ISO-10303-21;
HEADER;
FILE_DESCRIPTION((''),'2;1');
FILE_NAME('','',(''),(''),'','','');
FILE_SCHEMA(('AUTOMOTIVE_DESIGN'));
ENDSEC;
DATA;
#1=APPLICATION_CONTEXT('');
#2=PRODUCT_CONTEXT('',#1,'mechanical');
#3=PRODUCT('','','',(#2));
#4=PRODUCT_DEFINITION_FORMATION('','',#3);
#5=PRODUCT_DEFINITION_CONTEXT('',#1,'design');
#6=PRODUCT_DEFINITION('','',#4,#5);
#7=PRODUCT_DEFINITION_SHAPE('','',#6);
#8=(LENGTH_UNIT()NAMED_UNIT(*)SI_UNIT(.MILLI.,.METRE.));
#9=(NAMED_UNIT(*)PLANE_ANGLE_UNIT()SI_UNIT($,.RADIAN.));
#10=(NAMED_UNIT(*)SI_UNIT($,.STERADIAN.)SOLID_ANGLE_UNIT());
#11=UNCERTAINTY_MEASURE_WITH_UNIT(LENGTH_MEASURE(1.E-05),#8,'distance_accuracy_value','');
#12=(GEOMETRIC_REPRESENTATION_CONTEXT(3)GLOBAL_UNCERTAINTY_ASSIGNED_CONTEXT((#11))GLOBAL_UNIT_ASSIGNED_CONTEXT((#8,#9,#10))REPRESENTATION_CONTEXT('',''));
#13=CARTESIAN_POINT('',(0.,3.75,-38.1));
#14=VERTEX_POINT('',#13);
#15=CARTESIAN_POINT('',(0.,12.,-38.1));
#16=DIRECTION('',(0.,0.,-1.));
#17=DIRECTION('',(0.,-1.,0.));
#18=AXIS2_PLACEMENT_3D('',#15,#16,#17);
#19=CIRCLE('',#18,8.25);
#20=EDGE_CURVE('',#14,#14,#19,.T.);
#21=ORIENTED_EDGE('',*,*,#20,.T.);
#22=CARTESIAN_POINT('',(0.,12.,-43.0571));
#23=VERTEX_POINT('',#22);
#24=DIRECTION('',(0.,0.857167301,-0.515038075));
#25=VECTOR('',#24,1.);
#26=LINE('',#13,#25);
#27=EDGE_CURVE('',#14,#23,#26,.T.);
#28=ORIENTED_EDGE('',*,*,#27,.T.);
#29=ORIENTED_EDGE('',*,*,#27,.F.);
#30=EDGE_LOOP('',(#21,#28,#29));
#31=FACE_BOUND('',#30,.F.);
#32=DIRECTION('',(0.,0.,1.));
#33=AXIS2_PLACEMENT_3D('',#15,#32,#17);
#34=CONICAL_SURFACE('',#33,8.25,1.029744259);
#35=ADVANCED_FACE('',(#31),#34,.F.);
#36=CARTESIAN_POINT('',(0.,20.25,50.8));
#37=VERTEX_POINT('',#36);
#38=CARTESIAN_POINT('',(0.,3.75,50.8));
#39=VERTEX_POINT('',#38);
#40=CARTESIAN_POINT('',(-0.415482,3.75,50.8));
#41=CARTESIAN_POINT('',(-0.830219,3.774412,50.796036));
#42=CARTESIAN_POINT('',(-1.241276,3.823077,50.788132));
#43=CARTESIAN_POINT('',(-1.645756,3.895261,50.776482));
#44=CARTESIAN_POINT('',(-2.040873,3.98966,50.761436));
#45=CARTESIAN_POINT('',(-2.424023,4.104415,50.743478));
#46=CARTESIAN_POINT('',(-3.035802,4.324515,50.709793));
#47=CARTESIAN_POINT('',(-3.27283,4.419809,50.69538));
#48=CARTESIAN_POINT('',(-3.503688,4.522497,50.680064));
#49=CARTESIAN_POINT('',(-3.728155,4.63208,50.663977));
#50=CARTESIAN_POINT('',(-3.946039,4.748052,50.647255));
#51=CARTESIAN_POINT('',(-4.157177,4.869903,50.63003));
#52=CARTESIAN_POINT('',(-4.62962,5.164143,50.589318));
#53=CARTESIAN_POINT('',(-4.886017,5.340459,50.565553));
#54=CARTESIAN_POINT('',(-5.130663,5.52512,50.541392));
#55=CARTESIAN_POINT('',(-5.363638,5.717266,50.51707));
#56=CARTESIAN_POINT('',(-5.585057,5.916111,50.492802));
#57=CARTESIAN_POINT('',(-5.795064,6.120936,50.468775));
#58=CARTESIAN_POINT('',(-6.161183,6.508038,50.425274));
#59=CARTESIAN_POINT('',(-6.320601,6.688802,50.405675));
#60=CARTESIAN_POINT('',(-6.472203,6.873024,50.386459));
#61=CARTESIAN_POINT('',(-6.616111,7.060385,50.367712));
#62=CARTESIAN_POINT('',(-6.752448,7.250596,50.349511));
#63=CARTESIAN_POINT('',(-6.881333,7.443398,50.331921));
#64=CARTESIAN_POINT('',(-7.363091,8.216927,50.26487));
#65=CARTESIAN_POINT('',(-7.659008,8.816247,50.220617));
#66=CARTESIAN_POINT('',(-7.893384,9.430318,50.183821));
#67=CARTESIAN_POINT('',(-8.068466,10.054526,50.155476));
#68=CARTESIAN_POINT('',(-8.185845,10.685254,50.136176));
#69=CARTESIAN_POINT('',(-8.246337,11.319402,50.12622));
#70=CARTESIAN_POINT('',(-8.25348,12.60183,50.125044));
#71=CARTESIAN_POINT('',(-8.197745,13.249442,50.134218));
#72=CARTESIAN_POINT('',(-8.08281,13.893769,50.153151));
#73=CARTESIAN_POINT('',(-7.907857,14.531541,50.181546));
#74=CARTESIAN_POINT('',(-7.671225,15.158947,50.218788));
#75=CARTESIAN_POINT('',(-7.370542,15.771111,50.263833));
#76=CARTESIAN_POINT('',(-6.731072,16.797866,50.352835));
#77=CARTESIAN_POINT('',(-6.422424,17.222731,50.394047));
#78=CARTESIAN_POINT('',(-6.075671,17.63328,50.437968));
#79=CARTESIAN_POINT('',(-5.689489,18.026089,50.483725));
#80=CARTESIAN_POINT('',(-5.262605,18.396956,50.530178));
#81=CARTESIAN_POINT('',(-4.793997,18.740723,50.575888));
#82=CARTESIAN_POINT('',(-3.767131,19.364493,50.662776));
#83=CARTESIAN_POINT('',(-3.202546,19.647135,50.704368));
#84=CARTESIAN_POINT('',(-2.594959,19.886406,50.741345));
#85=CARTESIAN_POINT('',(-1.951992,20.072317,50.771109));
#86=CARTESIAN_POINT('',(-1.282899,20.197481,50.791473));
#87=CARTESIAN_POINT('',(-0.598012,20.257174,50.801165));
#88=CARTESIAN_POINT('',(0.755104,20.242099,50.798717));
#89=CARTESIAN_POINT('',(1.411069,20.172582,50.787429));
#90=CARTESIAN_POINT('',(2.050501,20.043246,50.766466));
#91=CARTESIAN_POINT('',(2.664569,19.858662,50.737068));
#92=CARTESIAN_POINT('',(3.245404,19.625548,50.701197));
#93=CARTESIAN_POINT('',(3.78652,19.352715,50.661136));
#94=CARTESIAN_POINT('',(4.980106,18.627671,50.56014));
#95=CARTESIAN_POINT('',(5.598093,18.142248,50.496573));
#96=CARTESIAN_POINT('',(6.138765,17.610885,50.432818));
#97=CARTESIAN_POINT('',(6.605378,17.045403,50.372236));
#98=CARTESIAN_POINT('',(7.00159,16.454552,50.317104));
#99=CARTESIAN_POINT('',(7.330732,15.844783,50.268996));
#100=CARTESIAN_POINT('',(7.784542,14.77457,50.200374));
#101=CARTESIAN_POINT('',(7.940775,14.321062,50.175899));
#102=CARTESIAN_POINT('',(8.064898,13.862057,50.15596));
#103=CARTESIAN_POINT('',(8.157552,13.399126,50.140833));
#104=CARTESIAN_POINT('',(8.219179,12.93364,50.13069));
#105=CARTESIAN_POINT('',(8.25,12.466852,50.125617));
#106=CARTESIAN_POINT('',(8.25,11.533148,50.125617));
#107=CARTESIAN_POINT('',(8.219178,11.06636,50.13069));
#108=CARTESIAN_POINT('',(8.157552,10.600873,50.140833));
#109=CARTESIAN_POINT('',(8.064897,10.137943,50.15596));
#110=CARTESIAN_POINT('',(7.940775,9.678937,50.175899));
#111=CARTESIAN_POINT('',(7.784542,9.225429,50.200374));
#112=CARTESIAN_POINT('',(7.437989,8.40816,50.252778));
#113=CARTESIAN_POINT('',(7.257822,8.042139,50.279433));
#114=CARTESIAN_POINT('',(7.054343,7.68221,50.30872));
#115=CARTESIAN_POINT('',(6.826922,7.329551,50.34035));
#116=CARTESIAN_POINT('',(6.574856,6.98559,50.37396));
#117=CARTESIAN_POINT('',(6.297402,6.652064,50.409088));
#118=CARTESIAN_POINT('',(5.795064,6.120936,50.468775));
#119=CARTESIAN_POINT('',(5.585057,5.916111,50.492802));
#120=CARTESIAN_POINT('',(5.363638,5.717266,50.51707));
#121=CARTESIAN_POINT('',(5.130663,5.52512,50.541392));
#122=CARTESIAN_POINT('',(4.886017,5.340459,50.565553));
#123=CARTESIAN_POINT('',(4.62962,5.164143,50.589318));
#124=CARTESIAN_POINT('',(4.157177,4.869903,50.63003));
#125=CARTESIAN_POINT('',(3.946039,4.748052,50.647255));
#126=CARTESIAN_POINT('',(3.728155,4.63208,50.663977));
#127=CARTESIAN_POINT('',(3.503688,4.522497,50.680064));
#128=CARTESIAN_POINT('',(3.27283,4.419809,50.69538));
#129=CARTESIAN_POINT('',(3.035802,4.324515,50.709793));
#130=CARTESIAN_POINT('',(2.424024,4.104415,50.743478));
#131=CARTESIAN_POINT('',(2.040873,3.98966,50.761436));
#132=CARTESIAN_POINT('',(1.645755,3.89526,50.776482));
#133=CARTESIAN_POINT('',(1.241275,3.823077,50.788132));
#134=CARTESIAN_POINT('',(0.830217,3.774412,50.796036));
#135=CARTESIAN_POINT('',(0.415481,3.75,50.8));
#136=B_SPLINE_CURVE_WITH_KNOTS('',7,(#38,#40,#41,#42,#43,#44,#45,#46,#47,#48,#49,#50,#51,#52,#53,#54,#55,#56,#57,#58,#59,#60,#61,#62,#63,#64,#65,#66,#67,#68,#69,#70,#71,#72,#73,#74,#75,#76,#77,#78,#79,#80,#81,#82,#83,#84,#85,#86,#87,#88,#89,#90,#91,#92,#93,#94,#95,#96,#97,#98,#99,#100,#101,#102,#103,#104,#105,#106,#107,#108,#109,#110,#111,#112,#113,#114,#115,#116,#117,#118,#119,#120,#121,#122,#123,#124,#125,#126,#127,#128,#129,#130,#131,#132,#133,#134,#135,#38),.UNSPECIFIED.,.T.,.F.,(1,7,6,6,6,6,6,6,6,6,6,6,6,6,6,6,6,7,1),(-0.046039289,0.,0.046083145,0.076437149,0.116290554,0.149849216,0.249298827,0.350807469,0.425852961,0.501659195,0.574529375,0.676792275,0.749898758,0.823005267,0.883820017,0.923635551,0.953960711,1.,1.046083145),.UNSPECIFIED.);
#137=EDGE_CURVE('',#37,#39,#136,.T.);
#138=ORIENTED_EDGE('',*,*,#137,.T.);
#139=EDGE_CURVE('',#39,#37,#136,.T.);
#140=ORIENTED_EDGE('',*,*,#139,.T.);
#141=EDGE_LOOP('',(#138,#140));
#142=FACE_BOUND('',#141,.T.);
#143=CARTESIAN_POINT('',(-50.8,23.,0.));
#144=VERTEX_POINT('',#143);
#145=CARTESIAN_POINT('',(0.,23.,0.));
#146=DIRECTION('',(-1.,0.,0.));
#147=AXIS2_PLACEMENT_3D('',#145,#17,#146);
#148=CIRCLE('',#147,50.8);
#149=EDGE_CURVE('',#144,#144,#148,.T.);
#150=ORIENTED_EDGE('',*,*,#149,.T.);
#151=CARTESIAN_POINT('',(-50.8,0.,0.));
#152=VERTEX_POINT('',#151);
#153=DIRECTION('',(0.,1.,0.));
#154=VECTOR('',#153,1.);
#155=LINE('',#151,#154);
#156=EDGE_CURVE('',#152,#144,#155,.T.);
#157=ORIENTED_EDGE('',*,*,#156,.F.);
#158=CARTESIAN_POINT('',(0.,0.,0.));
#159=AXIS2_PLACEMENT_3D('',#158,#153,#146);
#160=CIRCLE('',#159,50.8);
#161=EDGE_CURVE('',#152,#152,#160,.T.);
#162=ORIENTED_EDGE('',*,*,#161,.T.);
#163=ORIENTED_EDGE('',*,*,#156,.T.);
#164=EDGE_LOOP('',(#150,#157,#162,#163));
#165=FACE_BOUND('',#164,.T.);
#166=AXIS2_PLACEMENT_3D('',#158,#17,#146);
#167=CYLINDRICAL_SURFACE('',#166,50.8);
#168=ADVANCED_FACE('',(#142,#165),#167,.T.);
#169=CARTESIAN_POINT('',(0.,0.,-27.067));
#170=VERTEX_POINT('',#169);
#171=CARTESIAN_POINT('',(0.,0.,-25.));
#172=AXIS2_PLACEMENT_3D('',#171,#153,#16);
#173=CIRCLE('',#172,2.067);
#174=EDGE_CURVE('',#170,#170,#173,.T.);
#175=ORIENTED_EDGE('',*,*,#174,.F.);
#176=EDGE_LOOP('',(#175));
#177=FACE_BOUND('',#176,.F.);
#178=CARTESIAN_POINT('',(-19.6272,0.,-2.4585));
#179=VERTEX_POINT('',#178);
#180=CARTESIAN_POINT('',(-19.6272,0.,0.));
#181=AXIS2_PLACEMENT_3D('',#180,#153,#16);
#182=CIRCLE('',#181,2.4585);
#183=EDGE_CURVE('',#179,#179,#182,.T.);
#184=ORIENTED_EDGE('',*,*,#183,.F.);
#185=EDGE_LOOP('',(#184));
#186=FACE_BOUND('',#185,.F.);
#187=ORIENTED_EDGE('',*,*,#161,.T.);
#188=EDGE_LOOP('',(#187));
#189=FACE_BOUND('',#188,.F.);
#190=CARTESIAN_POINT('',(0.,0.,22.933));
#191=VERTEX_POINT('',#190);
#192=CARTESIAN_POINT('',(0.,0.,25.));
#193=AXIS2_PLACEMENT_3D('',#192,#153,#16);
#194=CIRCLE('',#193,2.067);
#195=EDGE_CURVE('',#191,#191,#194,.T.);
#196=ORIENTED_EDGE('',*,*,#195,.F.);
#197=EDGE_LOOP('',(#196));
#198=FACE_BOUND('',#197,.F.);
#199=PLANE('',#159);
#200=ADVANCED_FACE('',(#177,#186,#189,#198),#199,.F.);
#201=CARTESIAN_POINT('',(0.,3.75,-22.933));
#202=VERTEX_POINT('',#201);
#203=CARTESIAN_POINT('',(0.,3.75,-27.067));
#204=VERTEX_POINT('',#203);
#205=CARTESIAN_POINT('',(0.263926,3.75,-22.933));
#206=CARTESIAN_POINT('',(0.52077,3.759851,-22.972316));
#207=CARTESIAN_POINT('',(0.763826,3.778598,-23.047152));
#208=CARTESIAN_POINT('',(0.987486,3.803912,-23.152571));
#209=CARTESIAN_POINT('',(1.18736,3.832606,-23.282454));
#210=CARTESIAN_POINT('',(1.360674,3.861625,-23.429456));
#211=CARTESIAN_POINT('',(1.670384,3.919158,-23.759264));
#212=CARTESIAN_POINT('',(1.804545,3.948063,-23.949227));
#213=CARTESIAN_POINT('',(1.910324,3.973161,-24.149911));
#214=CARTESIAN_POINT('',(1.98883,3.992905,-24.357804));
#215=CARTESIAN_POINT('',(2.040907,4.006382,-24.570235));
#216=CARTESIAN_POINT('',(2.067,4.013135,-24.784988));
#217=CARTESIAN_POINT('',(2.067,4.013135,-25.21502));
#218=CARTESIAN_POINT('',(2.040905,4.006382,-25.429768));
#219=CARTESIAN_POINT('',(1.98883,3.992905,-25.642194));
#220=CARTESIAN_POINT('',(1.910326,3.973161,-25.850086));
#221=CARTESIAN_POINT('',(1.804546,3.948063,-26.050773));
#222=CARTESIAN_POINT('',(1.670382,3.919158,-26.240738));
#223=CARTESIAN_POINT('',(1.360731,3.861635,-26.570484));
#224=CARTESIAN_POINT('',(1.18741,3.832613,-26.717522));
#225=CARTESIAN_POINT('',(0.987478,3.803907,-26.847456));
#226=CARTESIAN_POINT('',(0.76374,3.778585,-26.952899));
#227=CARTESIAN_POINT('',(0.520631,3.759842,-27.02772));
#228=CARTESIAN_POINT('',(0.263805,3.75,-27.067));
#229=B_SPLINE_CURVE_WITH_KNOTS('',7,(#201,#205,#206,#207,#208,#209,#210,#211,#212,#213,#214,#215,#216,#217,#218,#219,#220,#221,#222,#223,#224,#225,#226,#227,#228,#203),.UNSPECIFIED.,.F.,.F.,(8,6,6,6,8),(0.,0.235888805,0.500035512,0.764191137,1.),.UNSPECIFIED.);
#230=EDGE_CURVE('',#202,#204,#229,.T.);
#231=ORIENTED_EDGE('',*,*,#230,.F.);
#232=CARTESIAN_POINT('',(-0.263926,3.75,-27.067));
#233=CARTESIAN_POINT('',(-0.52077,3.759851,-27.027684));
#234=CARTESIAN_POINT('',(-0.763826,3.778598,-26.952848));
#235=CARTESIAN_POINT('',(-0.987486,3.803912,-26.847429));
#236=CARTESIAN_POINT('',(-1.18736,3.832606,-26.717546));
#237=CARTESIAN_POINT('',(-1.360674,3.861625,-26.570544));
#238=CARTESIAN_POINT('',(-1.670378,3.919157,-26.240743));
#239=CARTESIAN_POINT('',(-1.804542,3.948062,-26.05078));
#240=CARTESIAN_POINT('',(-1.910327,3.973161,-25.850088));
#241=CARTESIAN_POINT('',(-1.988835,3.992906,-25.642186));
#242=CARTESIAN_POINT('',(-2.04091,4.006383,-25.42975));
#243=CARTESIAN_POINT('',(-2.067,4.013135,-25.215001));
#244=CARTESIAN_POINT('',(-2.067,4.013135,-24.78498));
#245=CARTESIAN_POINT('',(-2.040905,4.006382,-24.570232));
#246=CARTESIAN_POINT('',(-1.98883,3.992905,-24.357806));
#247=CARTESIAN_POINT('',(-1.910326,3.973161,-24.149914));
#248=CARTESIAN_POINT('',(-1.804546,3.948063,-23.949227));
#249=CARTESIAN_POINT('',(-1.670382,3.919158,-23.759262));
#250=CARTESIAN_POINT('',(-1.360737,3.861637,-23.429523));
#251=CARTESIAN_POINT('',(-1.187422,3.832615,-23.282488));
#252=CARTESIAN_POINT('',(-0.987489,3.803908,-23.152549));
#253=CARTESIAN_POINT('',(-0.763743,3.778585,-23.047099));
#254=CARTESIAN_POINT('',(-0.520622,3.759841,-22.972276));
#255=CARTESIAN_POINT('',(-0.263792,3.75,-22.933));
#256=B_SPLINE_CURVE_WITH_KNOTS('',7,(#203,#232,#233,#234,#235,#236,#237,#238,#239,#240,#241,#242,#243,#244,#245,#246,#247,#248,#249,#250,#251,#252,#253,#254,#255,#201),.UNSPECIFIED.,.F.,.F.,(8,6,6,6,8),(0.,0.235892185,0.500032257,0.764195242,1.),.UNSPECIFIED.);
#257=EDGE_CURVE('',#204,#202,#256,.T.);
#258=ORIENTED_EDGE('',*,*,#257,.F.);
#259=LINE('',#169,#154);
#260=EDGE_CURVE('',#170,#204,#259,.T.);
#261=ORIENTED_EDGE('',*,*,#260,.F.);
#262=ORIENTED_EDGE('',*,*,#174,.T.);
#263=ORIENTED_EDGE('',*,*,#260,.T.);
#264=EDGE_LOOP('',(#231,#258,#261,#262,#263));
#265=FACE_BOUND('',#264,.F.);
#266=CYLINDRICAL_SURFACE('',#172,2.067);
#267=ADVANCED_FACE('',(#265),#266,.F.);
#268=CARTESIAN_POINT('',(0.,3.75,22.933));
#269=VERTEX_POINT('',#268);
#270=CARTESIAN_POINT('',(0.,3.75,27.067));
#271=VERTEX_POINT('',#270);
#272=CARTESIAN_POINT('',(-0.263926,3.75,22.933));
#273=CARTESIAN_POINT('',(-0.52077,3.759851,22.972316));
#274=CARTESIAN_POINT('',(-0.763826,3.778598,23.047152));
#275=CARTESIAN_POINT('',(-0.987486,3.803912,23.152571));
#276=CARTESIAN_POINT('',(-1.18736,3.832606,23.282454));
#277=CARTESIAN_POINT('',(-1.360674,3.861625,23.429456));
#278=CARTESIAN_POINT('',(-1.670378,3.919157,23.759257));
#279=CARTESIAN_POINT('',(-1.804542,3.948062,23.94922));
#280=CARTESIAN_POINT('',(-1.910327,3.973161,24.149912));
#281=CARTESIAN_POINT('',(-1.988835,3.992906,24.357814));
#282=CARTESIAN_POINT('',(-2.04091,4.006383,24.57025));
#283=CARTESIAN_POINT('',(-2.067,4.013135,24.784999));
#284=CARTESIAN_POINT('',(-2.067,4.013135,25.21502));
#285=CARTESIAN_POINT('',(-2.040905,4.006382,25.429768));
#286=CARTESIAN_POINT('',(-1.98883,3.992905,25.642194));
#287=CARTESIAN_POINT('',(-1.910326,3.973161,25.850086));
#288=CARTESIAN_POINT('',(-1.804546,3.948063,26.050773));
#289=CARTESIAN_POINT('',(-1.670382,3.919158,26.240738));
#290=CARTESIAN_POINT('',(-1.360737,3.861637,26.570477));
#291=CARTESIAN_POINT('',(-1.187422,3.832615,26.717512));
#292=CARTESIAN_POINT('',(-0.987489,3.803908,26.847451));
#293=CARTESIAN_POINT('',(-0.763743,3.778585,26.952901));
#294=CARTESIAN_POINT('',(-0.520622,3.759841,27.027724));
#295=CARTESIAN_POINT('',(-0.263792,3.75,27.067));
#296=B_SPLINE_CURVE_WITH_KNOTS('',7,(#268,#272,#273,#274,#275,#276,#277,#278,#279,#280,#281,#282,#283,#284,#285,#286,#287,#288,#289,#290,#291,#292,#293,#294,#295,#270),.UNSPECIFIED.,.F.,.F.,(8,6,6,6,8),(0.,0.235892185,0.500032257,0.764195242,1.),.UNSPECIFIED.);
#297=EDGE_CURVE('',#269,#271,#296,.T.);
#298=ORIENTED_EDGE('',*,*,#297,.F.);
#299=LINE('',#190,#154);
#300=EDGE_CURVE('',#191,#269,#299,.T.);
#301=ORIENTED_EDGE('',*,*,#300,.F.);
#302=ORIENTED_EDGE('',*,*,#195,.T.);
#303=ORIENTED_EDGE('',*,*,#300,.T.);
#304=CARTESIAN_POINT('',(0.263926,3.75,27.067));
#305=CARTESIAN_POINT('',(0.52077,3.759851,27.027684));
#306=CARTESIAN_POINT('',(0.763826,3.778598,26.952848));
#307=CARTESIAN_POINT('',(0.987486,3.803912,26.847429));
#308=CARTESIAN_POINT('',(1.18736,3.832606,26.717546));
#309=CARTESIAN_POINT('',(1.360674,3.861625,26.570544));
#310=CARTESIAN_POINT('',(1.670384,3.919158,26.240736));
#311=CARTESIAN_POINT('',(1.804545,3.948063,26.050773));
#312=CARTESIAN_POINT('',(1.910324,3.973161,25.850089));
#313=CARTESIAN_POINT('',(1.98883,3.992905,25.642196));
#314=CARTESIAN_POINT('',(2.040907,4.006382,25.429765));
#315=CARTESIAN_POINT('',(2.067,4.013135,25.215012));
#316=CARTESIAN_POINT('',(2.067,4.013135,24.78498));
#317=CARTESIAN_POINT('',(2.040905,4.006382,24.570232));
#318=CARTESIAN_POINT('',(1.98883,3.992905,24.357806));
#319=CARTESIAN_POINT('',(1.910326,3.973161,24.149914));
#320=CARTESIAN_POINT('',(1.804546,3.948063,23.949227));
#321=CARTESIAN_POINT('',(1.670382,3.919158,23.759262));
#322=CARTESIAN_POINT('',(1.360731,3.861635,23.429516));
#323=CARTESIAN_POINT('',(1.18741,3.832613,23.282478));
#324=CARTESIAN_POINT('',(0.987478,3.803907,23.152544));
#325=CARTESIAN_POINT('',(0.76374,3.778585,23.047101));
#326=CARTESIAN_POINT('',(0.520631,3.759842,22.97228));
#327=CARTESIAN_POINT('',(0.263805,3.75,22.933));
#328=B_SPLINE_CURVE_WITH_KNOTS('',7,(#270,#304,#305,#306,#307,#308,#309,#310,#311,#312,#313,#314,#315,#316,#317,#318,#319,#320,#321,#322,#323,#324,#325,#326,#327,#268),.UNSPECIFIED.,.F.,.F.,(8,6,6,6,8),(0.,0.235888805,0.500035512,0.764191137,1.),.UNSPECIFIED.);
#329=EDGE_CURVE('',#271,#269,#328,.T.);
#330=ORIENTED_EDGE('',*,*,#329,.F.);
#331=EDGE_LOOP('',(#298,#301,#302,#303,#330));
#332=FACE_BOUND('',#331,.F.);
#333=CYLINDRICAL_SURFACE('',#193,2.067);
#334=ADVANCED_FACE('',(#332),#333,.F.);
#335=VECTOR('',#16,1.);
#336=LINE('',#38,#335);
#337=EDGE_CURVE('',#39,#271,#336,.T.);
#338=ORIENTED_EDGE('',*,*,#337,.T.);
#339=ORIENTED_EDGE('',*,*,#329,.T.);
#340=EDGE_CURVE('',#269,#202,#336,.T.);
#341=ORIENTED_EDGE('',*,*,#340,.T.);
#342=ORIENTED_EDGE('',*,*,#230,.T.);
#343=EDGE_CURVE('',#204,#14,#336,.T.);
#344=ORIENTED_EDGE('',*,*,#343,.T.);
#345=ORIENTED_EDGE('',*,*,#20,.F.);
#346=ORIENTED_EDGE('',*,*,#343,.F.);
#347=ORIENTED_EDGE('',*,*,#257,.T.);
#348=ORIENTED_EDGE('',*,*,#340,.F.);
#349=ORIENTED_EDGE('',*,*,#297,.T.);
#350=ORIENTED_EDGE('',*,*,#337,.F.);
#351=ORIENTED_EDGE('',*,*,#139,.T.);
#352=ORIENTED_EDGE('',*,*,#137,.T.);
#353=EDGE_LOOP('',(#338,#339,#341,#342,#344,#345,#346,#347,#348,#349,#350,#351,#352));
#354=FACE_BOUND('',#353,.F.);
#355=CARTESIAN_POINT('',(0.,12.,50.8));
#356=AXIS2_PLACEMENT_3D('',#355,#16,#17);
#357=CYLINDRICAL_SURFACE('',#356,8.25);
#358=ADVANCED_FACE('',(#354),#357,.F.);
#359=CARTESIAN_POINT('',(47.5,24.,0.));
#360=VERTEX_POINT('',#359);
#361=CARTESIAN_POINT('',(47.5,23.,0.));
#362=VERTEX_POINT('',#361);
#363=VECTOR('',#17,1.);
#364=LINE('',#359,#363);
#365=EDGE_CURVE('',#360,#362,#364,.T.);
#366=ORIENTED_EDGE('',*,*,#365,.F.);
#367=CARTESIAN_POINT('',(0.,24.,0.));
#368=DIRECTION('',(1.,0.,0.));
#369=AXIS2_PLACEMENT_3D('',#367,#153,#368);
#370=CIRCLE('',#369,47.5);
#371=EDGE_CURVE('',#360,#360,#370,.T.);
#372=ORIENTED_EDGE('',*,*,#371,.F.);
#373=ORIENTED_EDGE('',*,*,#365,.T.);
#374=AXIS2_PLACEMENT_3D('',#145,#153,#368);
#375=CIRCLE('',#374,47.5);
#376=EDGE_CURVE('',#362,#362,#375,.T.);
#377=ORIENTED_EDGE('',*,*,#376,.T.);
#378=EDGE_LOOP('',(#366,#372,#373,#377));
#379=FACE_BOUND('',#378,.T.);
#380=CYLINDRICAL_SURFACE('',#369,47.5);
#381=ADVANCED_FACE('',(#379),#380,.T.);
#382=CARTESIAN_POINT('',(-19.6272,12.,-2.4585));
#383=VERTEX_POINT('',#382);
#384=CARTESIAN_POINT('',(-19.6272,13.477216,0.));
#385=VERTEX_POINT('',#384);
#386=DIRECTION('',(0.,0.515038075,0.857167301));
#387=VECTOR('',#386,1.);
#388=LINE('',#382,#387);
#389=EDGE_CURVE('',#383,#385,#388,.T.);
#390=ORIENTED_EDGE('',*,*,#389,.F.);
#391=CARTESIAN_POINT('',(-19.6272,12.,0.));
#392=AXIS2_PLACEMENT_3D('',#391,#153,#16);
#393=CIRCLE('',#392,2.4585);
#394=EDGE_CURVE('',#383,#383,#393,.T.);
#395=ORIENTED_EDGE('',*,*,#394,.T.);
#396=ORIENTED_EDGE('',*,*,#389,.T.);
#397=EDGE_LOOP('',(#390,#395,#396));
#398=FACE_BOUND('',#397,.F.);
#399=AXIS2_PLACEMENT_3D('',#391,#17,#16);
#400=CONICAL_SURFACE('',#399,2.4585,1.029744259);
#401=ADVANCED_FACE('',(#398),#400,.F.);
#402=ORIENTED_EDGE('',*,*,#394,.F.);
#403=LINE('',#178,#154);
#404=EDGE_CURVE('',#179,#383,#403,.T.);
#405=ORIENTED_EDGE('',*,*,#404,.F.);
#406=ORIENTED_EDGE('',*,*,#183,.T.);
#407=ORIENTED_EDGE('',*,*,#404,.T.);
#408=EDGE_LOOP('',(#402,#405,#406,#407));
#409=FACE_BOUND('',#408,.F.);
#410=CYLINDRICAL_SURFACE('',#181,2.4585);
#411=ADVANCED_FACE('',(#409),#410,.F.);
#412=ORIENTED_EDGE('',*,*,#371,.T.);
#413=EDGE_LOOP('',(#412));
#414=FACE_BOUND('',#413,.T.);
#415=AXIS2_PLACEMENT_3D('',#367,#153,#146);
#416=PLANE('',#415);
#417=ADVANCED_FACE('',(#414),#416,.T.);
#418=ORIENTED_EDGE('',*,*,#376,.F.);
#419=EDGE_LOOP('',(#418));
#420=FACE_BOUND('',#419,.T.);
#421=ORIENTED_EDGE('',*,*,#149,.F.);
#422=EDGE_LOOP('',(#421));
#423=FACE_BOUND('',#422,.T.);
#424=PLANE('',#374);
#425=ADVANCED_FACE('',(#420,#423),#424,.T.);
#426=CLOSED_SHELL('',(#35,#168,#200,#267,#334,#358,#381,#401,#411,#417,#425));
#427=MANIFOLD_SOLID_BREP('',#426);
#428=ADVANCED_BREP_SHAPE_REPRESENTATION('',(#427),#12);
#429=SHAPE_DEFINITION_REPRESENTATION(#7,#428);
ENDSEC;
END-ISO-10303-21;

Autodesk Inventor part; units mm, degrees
ref_plane "YZ Plane" through (0, 0, 0) normal (1, 0, 0) x (0, 1, 0)
ref_plane "XZ Plane" through (0, 0, 0) normal (0, 1, 0) x (-1, 0, 0)
sketch "Sketch1" plane through (0, 0, 0) normal (0, 1, 0) x (-1, 0, 0)
  circle A0 centre (0, 0) radius 50.8
  dimension "d0" = 101.6
extrude "Extrusion1" add sketch "Sketch1" along normal blind 24
ref_plane "Work Plane1" through (0, 0, 50.8) normal (0, 0, 1) x (1, 0, 0)
sketch "Sketch3" plane through (0, 0, 50.8) normal (0, 0, 1) x (1, 0, 0)
  line L0 (50.8, 24) -> (-50.8, 24) projected
  line L1 (0, 24) -> (0, 12) construction
  point P0 (0, 0)
  dimension "d7" = 12
hole "Hole1" at (0, 12, 50.8) direction (0, 0, -1) diameter 16.5 depth 88.9 tip angle 118
sketch "Sketch4" plane through (0, 0, 0) normal (0, -1, 0) x (1, 0, 0)
  line L0 (0, 0) -> (0, -25) construction
  line L1 (0, 0) -> (0, 25) construction
  dimension "d15" = 25
  dimension "d16" = 25
hole "Hole2" at (0, 0, 25) at (0, 0, -25) direction (0, 1, 0) diameter 4.134 end up to surface thread size "M5x0.8" class "6H" standard "ANSI Metric M Profile"
sketch "Sketch5" plane through (0, 0, 0) normal (0, -1, 0) x (1, 0, 0)
  point P0 (0, 0)
  point P1 (-19.6272, 0)
hole "Hole3" at (-19.6272, 0, 0) direction (0, 1, 0) diameter 4.917 depth 12 tip angle 118 thread size "M6x1" class "6H" standard "ANSI Metric M Profile"
ref_plane "Work Plane2" through (0, 0, -38.1) normal (0, 0, 1) x (1, 0, 0)
sketch "Sketch7" plane through (0, 24, 0) normal (0, 1, 0) x (1, 0, 0)
  circle A0 centre (0, 0) radius 50.8
  circle A1 centre (0, 0) radius 47.5
  dimension "d35" = 101.6
  dimension "d36" = 95
extrude "Extrusion4" cut sketch "Sketch7" against normal blind 1
properties part number "Platogrueso" material "Aluminum 6061"
